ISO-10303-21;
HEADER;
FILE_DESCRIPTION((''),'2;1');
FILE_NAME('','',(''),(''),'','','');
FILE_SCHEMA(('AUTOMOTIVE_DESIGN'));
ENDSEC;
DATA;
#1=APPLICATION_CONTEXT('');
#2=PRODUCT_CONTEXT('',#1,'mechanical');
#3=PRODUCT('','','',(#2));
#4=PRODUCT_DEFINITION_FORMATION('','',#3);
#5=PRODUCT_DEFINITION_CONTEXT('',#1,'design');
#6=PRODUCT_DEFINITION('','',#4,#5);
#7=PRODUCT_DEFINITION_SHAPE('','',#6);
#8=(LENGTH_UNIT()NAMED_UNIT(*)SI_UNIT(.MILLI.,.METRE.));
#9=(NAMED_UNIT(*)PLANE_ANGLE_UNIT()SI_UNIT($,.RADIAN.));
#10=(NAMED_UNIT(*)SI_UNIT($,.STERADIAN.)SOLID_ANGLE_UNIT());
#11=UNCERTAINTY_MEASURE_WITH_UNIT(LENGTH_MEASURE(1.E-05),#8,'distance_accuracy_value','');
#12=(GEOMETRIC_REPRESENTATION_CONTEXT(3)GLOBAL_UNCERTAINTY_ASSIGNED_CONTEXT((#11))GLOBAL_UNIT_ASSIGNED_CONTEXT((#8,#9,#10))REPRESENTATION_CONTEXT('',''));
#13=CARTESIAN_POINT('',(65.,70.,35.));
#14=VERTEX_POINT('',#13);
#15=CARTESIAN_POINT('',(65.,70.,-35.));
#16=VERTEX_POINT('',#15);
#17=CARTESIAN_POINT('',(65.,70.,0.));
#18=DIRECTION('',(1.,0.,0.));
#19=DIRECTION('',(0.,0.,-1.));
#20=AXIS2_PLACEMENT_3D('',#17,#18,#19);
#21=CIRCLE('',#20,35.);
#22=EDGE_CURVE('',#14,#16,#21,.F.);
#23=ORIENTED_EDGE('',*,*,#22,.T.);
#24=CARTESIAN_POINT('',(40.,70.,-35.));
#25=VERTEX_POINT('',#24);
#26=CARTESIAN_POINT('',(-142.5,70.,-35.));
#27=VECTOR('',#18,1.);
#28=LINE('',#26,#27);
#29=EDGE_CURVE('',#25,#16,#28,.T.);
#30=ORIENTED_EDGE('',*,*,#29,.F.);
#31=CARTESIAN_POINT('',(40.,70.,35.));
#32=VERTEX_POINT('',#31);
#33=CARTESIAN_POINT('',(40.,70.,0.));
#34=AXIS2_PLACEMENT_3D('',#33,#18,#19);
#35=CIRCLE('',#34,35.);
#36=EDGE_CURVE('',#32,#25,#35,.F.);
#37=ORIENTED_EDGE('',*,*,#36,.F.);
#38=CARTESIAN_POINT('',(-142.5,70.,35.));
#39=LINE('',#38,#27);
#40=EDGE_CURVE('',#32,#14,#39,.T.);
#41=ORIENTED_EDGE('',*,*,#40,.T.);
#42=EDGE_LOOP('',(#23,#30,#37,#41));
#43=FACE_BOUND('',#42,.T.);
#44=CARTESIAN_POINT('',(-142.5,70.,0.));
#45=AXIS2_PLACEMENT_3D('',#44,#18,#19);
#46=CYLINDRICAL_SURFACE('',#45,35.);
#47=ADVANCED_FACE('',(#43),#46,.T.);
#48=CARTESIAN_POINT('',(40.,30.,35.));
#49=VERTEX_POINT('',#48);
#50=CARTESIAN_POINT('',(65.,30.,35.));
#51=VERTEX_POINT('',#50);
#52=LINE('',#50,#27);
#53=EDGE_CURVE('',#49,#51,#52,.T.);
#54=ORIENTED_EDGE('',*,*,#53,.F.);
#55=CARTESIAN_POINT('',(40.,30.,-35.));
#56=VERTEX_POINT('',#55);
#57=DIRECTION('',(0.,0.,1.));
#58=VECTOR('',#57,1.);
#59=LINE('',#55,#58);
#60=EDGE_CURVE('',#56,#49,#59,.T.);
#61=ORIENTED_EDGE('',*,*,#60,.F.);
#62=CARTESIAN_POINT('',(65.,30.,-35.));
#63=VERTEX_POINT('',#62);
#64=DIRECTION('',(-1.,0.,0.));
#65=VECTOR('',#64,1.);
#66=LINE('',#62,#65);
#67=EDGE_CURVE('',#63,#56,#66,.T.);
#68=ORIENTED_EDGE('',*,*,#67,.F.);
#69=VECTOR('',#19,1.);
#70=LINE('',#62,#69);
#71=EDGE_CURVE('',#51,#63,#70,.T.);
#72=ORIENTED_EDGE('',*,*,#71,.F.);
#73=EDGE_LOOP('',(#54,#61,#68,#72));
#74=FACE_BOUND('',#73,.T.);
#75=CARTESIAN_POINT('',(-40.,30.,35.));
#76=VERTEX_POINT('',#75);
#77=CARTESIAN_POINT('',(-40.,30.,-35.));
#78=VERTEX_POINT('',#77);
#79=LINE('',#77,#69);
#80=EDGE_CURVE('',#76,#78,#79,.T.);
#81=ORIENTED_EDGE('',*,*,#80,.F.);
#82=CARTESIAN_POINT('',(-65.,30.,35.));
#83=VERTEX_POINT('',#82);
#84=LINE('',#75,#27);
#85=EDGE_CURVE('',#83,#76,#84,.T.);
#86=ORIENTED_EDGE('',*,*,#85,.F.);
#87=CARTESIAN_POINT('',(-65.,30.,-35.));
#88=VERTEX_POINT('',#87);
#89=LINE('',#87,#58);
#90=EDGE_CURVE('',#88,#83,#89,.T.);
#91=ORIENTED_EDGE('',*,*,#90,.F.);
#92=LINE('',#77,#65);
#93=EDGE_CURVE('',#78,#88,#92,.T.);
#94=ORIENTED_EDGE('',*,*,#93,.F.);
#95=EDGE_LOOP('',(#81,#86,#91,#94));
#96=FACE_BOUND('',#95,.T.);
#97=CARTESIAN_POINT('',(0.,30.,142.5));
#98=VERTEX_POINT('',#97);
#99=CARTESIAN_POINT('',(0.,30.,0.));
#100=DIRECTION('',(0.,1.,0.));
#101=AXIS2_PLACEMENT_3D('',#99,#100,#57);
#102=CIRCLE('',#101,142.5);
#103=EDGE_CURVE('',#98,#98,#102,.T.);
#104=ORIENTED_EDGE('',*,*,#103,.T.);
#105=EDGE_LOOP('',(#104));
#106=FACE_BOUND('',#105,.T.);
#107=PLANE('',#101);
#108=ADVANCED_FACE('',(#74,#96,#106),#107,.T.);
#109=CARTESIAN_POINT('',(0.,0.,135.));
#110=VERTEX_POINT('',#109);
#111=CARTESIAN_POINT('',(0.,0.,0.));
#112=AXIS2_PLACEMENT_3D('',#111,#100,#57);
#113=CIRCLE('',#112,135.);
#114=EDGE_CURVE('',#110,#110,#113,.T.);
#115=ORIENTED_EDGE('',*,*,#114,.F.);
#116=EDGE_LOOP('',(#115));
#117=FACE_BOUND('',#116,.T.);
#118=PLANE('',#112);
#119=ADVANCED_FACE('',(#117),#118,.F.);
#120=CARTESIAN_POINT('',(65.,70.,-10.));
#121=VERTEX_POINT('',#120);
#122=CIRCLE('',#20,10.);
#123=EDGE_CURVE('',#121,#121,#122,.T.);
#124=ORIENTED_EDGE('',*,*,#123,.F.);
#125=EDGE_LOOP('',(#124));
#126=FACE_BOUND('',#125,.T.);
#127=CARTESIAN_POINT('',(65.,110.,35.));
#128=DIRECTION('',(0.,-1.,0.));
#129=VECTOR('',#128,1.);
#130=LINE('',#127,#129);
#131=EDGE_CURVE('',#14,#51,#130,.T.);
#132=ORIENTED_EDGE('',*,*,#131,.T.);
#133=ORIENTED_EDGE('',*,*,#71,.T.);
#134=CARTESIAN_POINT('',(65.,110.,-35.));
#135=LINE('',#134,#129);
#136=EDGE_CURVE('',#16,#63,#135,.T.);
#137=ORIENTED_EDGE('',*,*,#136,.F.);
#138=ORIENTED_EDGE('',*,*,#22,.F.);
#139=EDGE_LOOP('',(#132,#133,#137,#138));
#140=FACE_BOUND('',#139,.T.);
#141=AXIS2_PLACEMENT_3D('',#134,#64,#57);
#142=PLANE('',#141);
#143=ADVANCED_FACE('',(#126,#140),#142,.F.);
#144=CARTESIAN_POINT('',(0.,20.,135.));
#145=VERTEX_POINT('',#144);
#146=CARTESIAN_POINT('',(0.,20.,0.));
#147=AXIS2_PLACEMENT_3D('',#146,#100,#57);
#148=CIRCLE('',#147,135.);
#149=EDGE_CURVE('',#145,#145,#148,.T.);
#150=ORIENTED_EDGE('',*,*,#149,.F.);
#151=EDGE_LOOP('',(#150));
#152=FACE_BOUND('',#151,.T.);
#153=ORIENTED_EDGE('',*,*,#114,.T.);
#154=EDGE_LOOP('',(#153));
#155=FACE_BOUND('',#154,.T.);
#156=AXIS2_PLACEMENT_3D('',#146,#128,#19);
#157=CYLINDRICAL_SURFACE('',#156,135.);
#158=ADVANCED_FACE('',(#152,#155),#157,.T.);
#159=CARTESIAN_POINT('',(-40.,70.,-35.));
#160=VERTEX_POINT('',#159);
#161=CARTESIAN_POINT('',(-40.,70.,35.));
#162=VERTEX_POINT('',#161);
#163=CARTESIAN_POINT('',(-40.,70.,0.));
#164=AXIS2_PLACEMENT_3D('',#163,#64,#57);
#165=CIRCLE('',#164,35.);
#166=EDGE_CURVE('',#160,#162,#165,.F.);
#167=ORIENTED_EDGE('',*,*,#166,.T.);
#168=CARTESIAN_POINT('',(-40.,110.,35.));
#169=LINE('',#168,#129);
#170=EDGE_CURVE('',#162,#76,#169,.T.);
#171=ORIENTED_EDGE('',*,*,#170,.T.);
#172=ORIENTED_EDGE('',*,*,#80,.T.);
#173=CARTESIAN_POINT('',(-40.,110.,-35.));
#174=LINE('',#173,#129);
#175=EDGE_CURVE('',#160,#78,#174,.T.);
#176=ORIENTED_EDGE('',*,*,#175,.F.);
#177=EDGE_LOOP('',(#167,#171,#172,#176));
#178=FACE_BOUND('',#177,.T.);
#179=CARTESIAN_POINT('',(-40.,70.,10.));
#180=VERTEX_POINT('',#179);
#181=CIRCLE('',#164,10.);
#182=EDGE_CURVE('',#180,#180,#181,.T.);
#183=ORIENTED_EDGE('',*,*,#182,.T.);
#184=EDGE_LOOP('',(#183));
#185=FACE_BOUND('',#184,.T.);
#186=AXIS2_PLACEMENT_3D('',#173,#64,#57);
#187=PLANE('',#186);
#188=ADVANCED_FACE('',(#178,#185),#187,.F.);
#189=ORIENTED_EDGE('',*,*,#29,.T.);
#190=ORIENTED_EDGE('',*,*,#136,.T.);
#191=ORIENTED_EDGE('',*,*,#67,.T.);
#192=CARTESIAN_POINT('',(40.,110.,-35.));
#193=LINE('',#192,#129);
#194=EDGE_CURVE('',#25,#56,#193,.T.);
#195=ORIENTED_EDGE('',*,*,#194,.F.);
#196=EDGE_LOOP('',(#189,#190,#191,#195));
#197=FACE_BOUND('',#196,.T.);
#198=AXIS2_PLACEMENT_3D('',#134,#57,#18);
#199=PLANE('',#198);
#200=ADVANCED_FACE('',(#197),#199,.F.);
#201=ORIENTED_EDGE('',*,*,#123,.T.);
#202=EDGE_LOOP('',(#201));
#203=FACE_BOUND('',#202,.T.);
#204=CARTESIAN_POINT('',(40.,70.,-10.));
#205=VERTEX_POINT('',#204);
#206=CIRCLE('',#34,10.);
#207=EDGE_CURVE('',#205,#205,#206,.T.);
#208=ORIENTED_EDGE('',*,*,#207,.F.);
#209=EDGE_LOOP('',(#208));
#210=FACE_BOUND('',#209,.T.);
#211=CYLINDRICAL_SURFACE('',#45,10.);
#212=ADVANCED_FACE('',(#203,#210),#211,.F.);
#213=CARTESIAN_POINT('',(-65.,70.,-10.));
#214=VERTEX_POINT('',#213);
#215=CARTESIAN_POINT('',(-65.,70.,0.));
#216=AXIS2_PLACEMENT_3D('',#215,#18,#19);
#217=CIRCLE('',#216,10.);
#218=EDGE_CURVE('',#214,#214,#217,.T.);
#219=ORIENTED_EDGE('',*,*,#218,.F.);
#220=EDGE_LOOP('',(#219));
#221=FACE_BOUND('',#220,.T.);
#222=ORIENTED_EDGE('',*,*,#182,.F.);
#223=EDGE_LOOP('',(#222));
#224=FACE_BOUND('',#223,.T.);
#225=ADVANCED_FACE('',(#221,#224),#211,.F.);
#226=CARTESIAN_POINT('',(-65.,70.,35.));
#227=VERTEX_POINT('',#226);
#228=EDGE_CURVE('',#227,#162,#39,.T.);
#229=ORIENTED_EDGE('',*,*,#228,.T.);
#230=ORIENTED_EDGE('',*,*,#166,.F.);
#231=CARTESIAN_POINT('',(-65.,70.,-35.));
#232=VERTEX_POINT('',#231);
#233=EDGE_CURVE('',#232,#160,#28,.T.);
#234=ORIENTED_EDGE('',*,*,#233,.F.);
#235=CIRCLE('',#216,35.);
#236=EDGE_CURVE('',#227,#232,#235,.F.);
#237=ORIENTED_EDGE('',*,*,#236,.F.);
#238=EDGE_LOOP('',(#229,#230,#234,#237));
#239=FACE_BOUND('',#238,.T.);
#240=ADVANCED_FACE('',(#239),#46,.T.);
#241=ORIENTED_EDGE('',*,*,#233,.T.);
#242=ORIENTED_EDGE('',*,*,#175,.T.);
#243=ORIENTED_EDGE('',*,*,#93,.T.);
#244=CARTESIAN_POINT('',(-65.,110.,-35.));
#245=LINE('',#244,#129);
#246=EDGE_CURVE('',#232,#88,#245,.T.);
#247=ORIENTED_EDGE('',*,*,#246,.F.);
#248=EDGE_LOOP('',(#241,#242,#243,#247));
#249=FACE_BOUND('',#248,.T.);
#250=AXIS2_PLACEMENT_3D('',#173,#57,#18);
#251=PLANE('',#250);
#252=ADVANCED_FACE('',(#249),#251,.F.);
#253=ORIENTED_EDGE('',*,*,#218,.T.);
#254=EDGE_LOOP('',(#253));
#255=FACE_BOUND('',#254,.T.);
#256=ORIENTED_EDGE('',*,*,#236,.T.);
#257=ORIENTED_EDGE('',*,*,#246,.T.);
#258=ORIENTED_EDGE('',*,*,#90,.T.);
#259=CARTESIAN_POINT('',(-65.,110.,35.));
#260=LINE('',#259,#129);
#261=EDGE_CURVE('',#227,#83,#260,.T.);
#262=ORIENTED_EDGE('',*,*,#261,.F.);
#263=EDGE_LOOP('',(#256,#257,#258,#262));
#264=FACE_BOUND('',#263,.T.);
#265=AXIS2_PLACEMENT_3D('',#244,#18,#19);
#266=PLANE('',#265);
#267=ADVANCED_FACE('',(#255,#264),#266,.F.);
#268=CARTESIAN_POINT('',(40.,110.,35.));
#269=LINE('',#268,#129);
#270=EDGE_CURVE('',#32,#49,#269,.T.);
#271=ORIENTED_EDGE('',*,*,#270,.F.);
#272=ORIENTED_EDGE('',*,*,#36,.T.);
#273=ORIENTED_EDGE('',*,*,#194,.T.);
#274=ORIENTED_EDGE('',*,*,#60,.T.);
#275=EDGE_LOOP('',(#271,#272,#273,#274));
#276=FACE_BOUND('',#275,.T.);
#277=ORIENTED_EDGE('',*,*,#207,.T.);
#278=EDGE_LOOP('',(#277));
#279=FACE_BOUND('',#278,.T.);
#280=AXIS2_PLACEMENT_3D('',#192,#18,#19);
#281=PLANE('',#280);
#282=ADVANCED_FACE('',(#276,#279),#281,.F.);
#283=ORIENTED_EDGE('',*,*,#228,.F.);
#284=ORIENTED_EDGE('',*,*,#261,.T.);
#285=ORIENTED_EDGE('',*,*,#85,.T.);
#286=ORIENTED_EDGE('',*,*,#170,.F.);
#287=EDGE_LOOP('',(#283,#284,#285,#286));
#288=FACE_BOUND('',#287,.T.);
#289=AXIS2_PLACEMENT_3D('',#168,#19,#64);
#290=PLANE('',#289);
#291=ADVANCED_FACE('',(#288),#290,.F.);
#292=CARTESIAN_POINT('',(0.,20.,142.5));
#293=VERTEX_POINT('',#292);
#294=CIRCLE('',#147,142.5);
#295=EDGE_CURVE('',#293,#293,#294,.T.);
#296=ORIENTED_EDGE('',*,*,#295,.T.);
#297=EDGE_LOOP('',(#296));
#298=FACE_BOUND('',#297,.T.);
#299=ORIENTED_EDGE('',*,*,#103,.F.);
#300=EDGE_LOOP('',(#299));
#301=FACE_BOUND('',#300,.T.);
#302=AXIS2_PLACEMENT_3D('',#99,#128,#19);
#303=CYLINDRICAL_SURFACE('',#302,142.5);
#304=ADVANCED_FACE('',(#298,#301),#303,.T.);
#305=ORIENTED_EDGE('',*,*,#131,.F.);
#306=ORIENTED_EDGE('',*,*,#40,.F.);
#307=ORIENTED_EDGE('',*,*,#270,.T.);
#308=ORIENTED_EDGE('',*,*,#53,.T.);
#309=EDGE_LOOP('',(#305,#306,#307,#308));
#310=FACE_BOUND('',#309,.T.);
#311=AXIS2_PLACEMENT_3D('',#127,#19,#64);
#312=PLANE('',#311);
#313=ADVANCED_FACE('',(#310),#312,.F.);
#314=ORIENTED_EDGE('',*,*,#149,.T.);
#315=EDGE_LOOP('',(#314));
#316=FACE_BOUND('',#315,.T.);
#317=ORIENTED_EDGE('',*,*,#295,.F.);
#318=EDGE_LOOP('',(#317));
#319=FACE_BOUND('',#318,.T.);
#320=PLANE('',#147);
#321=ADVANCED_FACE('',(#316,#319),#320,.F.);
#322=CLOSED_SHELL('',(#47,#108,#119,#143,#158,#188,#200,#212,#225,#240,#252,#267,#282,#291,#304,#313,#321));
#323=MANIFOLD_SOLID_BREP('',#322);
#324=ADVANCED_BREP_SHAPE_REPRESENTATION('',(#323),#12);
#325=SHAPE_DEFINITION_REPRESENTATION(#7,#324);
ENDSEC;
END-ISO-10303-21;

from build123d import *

# Parameters (mm, degrees)
SKETCH1_R           = 135
BOSS_EXTRUDE1_DEPTH = 20
SKETCH3_R           = 142.5
BOSS_EXTRUDE3_DEPTH = 10
SKETCH4_W           = 25
SKETCH4_H           = 70
BOSS_EXTRUDE4_DEPTH = 80
CUT_EXTRUDE1_START  = -130
CUT_EXTRUDE1_DEPTH  = 130
SKETCH6_R           = 10
CUT_EXTRUDE2_DEPTH  = 273.740719365


# Read off the part's stored shape, not the designer's step: Cut-Extrude1
with BuildPart() as part:
    # Sketch1 → Boss-Extrude1 (new body)
    with BuildSketch(Plane(origin=(0, 0, 0), x_dir=(1, 0, 0), z_dir=(0, 1, 0))):
        with Locations(Location((0, 0, 0), (0, 0, 270))):
            Circle(SKETCH1_R)
    extrude(amount=BOSS_EXTRUDE1_DEPTH)

    # Sketch3 → Boss-Extrude3 (add)
    with BuildSketch(Plane(origin=(0, 20, 0), x_dir=(1, 0, 0), z_dir=(0, 1, 0))):
        with Locations(Location((0, 0, 0), (0, 0, 270))):
            Circle(SKETCH3_R)
    extrude(amount=BOSS_EXTRUDE3_DEPTH)

    # Sketch4 → Boss-Extrude4 (add)
    with BuildSketch(Plane(origin=(0, 30, 0), x_dir=(1, 0, 0), z_dir=(0, 1, 0))):
        with Locations((-52.5, 0)):
            Rectangle(SKETCH4_W, SKETCH4_H)
        with Locations((52.5, 0)):
            Rectangle(SKETCH4_W, SKETCH4_H)
    extrude(amount=BOSS_EXTRUDE4_DEPTH)

    # Cut-Extrude1 outline → Cut-Extrude1 (cut)
    with BuildSketch(Plane(origin=(65, 0, 0), x_dir=(0, 0, -1), z_dir=(1, 0, 0)).offset(CUT_EXTRUDE1_START)):
        with BuildLine():
            ThreePointArc((-35, 70), (0, 105), (35, 70))
            Line((35, 70), (35, 110))
            Line((35, 110), (-35, 110))
            Line((-35, 110), (-35, 70))
        make_face()
    extrude(amount=CUT_EXTRUDE1_DEPTH, mode=Mode.SUBTRACT)

    # Sketch6 → Cut-Extrude2 (cut, through all)
    with BuildSketch(Plane(origin=(65, 0, 0), x_dir=(0, 0, -1), z_dir=(1, 0, 0))):
        with Locations((0, 70)):
            Circle(SKETCH6_R)
    extrude(amount=-CUT_EXTRUDE2_DEPTH, mode=Mode.SUBTRACT)


solid = part.part
